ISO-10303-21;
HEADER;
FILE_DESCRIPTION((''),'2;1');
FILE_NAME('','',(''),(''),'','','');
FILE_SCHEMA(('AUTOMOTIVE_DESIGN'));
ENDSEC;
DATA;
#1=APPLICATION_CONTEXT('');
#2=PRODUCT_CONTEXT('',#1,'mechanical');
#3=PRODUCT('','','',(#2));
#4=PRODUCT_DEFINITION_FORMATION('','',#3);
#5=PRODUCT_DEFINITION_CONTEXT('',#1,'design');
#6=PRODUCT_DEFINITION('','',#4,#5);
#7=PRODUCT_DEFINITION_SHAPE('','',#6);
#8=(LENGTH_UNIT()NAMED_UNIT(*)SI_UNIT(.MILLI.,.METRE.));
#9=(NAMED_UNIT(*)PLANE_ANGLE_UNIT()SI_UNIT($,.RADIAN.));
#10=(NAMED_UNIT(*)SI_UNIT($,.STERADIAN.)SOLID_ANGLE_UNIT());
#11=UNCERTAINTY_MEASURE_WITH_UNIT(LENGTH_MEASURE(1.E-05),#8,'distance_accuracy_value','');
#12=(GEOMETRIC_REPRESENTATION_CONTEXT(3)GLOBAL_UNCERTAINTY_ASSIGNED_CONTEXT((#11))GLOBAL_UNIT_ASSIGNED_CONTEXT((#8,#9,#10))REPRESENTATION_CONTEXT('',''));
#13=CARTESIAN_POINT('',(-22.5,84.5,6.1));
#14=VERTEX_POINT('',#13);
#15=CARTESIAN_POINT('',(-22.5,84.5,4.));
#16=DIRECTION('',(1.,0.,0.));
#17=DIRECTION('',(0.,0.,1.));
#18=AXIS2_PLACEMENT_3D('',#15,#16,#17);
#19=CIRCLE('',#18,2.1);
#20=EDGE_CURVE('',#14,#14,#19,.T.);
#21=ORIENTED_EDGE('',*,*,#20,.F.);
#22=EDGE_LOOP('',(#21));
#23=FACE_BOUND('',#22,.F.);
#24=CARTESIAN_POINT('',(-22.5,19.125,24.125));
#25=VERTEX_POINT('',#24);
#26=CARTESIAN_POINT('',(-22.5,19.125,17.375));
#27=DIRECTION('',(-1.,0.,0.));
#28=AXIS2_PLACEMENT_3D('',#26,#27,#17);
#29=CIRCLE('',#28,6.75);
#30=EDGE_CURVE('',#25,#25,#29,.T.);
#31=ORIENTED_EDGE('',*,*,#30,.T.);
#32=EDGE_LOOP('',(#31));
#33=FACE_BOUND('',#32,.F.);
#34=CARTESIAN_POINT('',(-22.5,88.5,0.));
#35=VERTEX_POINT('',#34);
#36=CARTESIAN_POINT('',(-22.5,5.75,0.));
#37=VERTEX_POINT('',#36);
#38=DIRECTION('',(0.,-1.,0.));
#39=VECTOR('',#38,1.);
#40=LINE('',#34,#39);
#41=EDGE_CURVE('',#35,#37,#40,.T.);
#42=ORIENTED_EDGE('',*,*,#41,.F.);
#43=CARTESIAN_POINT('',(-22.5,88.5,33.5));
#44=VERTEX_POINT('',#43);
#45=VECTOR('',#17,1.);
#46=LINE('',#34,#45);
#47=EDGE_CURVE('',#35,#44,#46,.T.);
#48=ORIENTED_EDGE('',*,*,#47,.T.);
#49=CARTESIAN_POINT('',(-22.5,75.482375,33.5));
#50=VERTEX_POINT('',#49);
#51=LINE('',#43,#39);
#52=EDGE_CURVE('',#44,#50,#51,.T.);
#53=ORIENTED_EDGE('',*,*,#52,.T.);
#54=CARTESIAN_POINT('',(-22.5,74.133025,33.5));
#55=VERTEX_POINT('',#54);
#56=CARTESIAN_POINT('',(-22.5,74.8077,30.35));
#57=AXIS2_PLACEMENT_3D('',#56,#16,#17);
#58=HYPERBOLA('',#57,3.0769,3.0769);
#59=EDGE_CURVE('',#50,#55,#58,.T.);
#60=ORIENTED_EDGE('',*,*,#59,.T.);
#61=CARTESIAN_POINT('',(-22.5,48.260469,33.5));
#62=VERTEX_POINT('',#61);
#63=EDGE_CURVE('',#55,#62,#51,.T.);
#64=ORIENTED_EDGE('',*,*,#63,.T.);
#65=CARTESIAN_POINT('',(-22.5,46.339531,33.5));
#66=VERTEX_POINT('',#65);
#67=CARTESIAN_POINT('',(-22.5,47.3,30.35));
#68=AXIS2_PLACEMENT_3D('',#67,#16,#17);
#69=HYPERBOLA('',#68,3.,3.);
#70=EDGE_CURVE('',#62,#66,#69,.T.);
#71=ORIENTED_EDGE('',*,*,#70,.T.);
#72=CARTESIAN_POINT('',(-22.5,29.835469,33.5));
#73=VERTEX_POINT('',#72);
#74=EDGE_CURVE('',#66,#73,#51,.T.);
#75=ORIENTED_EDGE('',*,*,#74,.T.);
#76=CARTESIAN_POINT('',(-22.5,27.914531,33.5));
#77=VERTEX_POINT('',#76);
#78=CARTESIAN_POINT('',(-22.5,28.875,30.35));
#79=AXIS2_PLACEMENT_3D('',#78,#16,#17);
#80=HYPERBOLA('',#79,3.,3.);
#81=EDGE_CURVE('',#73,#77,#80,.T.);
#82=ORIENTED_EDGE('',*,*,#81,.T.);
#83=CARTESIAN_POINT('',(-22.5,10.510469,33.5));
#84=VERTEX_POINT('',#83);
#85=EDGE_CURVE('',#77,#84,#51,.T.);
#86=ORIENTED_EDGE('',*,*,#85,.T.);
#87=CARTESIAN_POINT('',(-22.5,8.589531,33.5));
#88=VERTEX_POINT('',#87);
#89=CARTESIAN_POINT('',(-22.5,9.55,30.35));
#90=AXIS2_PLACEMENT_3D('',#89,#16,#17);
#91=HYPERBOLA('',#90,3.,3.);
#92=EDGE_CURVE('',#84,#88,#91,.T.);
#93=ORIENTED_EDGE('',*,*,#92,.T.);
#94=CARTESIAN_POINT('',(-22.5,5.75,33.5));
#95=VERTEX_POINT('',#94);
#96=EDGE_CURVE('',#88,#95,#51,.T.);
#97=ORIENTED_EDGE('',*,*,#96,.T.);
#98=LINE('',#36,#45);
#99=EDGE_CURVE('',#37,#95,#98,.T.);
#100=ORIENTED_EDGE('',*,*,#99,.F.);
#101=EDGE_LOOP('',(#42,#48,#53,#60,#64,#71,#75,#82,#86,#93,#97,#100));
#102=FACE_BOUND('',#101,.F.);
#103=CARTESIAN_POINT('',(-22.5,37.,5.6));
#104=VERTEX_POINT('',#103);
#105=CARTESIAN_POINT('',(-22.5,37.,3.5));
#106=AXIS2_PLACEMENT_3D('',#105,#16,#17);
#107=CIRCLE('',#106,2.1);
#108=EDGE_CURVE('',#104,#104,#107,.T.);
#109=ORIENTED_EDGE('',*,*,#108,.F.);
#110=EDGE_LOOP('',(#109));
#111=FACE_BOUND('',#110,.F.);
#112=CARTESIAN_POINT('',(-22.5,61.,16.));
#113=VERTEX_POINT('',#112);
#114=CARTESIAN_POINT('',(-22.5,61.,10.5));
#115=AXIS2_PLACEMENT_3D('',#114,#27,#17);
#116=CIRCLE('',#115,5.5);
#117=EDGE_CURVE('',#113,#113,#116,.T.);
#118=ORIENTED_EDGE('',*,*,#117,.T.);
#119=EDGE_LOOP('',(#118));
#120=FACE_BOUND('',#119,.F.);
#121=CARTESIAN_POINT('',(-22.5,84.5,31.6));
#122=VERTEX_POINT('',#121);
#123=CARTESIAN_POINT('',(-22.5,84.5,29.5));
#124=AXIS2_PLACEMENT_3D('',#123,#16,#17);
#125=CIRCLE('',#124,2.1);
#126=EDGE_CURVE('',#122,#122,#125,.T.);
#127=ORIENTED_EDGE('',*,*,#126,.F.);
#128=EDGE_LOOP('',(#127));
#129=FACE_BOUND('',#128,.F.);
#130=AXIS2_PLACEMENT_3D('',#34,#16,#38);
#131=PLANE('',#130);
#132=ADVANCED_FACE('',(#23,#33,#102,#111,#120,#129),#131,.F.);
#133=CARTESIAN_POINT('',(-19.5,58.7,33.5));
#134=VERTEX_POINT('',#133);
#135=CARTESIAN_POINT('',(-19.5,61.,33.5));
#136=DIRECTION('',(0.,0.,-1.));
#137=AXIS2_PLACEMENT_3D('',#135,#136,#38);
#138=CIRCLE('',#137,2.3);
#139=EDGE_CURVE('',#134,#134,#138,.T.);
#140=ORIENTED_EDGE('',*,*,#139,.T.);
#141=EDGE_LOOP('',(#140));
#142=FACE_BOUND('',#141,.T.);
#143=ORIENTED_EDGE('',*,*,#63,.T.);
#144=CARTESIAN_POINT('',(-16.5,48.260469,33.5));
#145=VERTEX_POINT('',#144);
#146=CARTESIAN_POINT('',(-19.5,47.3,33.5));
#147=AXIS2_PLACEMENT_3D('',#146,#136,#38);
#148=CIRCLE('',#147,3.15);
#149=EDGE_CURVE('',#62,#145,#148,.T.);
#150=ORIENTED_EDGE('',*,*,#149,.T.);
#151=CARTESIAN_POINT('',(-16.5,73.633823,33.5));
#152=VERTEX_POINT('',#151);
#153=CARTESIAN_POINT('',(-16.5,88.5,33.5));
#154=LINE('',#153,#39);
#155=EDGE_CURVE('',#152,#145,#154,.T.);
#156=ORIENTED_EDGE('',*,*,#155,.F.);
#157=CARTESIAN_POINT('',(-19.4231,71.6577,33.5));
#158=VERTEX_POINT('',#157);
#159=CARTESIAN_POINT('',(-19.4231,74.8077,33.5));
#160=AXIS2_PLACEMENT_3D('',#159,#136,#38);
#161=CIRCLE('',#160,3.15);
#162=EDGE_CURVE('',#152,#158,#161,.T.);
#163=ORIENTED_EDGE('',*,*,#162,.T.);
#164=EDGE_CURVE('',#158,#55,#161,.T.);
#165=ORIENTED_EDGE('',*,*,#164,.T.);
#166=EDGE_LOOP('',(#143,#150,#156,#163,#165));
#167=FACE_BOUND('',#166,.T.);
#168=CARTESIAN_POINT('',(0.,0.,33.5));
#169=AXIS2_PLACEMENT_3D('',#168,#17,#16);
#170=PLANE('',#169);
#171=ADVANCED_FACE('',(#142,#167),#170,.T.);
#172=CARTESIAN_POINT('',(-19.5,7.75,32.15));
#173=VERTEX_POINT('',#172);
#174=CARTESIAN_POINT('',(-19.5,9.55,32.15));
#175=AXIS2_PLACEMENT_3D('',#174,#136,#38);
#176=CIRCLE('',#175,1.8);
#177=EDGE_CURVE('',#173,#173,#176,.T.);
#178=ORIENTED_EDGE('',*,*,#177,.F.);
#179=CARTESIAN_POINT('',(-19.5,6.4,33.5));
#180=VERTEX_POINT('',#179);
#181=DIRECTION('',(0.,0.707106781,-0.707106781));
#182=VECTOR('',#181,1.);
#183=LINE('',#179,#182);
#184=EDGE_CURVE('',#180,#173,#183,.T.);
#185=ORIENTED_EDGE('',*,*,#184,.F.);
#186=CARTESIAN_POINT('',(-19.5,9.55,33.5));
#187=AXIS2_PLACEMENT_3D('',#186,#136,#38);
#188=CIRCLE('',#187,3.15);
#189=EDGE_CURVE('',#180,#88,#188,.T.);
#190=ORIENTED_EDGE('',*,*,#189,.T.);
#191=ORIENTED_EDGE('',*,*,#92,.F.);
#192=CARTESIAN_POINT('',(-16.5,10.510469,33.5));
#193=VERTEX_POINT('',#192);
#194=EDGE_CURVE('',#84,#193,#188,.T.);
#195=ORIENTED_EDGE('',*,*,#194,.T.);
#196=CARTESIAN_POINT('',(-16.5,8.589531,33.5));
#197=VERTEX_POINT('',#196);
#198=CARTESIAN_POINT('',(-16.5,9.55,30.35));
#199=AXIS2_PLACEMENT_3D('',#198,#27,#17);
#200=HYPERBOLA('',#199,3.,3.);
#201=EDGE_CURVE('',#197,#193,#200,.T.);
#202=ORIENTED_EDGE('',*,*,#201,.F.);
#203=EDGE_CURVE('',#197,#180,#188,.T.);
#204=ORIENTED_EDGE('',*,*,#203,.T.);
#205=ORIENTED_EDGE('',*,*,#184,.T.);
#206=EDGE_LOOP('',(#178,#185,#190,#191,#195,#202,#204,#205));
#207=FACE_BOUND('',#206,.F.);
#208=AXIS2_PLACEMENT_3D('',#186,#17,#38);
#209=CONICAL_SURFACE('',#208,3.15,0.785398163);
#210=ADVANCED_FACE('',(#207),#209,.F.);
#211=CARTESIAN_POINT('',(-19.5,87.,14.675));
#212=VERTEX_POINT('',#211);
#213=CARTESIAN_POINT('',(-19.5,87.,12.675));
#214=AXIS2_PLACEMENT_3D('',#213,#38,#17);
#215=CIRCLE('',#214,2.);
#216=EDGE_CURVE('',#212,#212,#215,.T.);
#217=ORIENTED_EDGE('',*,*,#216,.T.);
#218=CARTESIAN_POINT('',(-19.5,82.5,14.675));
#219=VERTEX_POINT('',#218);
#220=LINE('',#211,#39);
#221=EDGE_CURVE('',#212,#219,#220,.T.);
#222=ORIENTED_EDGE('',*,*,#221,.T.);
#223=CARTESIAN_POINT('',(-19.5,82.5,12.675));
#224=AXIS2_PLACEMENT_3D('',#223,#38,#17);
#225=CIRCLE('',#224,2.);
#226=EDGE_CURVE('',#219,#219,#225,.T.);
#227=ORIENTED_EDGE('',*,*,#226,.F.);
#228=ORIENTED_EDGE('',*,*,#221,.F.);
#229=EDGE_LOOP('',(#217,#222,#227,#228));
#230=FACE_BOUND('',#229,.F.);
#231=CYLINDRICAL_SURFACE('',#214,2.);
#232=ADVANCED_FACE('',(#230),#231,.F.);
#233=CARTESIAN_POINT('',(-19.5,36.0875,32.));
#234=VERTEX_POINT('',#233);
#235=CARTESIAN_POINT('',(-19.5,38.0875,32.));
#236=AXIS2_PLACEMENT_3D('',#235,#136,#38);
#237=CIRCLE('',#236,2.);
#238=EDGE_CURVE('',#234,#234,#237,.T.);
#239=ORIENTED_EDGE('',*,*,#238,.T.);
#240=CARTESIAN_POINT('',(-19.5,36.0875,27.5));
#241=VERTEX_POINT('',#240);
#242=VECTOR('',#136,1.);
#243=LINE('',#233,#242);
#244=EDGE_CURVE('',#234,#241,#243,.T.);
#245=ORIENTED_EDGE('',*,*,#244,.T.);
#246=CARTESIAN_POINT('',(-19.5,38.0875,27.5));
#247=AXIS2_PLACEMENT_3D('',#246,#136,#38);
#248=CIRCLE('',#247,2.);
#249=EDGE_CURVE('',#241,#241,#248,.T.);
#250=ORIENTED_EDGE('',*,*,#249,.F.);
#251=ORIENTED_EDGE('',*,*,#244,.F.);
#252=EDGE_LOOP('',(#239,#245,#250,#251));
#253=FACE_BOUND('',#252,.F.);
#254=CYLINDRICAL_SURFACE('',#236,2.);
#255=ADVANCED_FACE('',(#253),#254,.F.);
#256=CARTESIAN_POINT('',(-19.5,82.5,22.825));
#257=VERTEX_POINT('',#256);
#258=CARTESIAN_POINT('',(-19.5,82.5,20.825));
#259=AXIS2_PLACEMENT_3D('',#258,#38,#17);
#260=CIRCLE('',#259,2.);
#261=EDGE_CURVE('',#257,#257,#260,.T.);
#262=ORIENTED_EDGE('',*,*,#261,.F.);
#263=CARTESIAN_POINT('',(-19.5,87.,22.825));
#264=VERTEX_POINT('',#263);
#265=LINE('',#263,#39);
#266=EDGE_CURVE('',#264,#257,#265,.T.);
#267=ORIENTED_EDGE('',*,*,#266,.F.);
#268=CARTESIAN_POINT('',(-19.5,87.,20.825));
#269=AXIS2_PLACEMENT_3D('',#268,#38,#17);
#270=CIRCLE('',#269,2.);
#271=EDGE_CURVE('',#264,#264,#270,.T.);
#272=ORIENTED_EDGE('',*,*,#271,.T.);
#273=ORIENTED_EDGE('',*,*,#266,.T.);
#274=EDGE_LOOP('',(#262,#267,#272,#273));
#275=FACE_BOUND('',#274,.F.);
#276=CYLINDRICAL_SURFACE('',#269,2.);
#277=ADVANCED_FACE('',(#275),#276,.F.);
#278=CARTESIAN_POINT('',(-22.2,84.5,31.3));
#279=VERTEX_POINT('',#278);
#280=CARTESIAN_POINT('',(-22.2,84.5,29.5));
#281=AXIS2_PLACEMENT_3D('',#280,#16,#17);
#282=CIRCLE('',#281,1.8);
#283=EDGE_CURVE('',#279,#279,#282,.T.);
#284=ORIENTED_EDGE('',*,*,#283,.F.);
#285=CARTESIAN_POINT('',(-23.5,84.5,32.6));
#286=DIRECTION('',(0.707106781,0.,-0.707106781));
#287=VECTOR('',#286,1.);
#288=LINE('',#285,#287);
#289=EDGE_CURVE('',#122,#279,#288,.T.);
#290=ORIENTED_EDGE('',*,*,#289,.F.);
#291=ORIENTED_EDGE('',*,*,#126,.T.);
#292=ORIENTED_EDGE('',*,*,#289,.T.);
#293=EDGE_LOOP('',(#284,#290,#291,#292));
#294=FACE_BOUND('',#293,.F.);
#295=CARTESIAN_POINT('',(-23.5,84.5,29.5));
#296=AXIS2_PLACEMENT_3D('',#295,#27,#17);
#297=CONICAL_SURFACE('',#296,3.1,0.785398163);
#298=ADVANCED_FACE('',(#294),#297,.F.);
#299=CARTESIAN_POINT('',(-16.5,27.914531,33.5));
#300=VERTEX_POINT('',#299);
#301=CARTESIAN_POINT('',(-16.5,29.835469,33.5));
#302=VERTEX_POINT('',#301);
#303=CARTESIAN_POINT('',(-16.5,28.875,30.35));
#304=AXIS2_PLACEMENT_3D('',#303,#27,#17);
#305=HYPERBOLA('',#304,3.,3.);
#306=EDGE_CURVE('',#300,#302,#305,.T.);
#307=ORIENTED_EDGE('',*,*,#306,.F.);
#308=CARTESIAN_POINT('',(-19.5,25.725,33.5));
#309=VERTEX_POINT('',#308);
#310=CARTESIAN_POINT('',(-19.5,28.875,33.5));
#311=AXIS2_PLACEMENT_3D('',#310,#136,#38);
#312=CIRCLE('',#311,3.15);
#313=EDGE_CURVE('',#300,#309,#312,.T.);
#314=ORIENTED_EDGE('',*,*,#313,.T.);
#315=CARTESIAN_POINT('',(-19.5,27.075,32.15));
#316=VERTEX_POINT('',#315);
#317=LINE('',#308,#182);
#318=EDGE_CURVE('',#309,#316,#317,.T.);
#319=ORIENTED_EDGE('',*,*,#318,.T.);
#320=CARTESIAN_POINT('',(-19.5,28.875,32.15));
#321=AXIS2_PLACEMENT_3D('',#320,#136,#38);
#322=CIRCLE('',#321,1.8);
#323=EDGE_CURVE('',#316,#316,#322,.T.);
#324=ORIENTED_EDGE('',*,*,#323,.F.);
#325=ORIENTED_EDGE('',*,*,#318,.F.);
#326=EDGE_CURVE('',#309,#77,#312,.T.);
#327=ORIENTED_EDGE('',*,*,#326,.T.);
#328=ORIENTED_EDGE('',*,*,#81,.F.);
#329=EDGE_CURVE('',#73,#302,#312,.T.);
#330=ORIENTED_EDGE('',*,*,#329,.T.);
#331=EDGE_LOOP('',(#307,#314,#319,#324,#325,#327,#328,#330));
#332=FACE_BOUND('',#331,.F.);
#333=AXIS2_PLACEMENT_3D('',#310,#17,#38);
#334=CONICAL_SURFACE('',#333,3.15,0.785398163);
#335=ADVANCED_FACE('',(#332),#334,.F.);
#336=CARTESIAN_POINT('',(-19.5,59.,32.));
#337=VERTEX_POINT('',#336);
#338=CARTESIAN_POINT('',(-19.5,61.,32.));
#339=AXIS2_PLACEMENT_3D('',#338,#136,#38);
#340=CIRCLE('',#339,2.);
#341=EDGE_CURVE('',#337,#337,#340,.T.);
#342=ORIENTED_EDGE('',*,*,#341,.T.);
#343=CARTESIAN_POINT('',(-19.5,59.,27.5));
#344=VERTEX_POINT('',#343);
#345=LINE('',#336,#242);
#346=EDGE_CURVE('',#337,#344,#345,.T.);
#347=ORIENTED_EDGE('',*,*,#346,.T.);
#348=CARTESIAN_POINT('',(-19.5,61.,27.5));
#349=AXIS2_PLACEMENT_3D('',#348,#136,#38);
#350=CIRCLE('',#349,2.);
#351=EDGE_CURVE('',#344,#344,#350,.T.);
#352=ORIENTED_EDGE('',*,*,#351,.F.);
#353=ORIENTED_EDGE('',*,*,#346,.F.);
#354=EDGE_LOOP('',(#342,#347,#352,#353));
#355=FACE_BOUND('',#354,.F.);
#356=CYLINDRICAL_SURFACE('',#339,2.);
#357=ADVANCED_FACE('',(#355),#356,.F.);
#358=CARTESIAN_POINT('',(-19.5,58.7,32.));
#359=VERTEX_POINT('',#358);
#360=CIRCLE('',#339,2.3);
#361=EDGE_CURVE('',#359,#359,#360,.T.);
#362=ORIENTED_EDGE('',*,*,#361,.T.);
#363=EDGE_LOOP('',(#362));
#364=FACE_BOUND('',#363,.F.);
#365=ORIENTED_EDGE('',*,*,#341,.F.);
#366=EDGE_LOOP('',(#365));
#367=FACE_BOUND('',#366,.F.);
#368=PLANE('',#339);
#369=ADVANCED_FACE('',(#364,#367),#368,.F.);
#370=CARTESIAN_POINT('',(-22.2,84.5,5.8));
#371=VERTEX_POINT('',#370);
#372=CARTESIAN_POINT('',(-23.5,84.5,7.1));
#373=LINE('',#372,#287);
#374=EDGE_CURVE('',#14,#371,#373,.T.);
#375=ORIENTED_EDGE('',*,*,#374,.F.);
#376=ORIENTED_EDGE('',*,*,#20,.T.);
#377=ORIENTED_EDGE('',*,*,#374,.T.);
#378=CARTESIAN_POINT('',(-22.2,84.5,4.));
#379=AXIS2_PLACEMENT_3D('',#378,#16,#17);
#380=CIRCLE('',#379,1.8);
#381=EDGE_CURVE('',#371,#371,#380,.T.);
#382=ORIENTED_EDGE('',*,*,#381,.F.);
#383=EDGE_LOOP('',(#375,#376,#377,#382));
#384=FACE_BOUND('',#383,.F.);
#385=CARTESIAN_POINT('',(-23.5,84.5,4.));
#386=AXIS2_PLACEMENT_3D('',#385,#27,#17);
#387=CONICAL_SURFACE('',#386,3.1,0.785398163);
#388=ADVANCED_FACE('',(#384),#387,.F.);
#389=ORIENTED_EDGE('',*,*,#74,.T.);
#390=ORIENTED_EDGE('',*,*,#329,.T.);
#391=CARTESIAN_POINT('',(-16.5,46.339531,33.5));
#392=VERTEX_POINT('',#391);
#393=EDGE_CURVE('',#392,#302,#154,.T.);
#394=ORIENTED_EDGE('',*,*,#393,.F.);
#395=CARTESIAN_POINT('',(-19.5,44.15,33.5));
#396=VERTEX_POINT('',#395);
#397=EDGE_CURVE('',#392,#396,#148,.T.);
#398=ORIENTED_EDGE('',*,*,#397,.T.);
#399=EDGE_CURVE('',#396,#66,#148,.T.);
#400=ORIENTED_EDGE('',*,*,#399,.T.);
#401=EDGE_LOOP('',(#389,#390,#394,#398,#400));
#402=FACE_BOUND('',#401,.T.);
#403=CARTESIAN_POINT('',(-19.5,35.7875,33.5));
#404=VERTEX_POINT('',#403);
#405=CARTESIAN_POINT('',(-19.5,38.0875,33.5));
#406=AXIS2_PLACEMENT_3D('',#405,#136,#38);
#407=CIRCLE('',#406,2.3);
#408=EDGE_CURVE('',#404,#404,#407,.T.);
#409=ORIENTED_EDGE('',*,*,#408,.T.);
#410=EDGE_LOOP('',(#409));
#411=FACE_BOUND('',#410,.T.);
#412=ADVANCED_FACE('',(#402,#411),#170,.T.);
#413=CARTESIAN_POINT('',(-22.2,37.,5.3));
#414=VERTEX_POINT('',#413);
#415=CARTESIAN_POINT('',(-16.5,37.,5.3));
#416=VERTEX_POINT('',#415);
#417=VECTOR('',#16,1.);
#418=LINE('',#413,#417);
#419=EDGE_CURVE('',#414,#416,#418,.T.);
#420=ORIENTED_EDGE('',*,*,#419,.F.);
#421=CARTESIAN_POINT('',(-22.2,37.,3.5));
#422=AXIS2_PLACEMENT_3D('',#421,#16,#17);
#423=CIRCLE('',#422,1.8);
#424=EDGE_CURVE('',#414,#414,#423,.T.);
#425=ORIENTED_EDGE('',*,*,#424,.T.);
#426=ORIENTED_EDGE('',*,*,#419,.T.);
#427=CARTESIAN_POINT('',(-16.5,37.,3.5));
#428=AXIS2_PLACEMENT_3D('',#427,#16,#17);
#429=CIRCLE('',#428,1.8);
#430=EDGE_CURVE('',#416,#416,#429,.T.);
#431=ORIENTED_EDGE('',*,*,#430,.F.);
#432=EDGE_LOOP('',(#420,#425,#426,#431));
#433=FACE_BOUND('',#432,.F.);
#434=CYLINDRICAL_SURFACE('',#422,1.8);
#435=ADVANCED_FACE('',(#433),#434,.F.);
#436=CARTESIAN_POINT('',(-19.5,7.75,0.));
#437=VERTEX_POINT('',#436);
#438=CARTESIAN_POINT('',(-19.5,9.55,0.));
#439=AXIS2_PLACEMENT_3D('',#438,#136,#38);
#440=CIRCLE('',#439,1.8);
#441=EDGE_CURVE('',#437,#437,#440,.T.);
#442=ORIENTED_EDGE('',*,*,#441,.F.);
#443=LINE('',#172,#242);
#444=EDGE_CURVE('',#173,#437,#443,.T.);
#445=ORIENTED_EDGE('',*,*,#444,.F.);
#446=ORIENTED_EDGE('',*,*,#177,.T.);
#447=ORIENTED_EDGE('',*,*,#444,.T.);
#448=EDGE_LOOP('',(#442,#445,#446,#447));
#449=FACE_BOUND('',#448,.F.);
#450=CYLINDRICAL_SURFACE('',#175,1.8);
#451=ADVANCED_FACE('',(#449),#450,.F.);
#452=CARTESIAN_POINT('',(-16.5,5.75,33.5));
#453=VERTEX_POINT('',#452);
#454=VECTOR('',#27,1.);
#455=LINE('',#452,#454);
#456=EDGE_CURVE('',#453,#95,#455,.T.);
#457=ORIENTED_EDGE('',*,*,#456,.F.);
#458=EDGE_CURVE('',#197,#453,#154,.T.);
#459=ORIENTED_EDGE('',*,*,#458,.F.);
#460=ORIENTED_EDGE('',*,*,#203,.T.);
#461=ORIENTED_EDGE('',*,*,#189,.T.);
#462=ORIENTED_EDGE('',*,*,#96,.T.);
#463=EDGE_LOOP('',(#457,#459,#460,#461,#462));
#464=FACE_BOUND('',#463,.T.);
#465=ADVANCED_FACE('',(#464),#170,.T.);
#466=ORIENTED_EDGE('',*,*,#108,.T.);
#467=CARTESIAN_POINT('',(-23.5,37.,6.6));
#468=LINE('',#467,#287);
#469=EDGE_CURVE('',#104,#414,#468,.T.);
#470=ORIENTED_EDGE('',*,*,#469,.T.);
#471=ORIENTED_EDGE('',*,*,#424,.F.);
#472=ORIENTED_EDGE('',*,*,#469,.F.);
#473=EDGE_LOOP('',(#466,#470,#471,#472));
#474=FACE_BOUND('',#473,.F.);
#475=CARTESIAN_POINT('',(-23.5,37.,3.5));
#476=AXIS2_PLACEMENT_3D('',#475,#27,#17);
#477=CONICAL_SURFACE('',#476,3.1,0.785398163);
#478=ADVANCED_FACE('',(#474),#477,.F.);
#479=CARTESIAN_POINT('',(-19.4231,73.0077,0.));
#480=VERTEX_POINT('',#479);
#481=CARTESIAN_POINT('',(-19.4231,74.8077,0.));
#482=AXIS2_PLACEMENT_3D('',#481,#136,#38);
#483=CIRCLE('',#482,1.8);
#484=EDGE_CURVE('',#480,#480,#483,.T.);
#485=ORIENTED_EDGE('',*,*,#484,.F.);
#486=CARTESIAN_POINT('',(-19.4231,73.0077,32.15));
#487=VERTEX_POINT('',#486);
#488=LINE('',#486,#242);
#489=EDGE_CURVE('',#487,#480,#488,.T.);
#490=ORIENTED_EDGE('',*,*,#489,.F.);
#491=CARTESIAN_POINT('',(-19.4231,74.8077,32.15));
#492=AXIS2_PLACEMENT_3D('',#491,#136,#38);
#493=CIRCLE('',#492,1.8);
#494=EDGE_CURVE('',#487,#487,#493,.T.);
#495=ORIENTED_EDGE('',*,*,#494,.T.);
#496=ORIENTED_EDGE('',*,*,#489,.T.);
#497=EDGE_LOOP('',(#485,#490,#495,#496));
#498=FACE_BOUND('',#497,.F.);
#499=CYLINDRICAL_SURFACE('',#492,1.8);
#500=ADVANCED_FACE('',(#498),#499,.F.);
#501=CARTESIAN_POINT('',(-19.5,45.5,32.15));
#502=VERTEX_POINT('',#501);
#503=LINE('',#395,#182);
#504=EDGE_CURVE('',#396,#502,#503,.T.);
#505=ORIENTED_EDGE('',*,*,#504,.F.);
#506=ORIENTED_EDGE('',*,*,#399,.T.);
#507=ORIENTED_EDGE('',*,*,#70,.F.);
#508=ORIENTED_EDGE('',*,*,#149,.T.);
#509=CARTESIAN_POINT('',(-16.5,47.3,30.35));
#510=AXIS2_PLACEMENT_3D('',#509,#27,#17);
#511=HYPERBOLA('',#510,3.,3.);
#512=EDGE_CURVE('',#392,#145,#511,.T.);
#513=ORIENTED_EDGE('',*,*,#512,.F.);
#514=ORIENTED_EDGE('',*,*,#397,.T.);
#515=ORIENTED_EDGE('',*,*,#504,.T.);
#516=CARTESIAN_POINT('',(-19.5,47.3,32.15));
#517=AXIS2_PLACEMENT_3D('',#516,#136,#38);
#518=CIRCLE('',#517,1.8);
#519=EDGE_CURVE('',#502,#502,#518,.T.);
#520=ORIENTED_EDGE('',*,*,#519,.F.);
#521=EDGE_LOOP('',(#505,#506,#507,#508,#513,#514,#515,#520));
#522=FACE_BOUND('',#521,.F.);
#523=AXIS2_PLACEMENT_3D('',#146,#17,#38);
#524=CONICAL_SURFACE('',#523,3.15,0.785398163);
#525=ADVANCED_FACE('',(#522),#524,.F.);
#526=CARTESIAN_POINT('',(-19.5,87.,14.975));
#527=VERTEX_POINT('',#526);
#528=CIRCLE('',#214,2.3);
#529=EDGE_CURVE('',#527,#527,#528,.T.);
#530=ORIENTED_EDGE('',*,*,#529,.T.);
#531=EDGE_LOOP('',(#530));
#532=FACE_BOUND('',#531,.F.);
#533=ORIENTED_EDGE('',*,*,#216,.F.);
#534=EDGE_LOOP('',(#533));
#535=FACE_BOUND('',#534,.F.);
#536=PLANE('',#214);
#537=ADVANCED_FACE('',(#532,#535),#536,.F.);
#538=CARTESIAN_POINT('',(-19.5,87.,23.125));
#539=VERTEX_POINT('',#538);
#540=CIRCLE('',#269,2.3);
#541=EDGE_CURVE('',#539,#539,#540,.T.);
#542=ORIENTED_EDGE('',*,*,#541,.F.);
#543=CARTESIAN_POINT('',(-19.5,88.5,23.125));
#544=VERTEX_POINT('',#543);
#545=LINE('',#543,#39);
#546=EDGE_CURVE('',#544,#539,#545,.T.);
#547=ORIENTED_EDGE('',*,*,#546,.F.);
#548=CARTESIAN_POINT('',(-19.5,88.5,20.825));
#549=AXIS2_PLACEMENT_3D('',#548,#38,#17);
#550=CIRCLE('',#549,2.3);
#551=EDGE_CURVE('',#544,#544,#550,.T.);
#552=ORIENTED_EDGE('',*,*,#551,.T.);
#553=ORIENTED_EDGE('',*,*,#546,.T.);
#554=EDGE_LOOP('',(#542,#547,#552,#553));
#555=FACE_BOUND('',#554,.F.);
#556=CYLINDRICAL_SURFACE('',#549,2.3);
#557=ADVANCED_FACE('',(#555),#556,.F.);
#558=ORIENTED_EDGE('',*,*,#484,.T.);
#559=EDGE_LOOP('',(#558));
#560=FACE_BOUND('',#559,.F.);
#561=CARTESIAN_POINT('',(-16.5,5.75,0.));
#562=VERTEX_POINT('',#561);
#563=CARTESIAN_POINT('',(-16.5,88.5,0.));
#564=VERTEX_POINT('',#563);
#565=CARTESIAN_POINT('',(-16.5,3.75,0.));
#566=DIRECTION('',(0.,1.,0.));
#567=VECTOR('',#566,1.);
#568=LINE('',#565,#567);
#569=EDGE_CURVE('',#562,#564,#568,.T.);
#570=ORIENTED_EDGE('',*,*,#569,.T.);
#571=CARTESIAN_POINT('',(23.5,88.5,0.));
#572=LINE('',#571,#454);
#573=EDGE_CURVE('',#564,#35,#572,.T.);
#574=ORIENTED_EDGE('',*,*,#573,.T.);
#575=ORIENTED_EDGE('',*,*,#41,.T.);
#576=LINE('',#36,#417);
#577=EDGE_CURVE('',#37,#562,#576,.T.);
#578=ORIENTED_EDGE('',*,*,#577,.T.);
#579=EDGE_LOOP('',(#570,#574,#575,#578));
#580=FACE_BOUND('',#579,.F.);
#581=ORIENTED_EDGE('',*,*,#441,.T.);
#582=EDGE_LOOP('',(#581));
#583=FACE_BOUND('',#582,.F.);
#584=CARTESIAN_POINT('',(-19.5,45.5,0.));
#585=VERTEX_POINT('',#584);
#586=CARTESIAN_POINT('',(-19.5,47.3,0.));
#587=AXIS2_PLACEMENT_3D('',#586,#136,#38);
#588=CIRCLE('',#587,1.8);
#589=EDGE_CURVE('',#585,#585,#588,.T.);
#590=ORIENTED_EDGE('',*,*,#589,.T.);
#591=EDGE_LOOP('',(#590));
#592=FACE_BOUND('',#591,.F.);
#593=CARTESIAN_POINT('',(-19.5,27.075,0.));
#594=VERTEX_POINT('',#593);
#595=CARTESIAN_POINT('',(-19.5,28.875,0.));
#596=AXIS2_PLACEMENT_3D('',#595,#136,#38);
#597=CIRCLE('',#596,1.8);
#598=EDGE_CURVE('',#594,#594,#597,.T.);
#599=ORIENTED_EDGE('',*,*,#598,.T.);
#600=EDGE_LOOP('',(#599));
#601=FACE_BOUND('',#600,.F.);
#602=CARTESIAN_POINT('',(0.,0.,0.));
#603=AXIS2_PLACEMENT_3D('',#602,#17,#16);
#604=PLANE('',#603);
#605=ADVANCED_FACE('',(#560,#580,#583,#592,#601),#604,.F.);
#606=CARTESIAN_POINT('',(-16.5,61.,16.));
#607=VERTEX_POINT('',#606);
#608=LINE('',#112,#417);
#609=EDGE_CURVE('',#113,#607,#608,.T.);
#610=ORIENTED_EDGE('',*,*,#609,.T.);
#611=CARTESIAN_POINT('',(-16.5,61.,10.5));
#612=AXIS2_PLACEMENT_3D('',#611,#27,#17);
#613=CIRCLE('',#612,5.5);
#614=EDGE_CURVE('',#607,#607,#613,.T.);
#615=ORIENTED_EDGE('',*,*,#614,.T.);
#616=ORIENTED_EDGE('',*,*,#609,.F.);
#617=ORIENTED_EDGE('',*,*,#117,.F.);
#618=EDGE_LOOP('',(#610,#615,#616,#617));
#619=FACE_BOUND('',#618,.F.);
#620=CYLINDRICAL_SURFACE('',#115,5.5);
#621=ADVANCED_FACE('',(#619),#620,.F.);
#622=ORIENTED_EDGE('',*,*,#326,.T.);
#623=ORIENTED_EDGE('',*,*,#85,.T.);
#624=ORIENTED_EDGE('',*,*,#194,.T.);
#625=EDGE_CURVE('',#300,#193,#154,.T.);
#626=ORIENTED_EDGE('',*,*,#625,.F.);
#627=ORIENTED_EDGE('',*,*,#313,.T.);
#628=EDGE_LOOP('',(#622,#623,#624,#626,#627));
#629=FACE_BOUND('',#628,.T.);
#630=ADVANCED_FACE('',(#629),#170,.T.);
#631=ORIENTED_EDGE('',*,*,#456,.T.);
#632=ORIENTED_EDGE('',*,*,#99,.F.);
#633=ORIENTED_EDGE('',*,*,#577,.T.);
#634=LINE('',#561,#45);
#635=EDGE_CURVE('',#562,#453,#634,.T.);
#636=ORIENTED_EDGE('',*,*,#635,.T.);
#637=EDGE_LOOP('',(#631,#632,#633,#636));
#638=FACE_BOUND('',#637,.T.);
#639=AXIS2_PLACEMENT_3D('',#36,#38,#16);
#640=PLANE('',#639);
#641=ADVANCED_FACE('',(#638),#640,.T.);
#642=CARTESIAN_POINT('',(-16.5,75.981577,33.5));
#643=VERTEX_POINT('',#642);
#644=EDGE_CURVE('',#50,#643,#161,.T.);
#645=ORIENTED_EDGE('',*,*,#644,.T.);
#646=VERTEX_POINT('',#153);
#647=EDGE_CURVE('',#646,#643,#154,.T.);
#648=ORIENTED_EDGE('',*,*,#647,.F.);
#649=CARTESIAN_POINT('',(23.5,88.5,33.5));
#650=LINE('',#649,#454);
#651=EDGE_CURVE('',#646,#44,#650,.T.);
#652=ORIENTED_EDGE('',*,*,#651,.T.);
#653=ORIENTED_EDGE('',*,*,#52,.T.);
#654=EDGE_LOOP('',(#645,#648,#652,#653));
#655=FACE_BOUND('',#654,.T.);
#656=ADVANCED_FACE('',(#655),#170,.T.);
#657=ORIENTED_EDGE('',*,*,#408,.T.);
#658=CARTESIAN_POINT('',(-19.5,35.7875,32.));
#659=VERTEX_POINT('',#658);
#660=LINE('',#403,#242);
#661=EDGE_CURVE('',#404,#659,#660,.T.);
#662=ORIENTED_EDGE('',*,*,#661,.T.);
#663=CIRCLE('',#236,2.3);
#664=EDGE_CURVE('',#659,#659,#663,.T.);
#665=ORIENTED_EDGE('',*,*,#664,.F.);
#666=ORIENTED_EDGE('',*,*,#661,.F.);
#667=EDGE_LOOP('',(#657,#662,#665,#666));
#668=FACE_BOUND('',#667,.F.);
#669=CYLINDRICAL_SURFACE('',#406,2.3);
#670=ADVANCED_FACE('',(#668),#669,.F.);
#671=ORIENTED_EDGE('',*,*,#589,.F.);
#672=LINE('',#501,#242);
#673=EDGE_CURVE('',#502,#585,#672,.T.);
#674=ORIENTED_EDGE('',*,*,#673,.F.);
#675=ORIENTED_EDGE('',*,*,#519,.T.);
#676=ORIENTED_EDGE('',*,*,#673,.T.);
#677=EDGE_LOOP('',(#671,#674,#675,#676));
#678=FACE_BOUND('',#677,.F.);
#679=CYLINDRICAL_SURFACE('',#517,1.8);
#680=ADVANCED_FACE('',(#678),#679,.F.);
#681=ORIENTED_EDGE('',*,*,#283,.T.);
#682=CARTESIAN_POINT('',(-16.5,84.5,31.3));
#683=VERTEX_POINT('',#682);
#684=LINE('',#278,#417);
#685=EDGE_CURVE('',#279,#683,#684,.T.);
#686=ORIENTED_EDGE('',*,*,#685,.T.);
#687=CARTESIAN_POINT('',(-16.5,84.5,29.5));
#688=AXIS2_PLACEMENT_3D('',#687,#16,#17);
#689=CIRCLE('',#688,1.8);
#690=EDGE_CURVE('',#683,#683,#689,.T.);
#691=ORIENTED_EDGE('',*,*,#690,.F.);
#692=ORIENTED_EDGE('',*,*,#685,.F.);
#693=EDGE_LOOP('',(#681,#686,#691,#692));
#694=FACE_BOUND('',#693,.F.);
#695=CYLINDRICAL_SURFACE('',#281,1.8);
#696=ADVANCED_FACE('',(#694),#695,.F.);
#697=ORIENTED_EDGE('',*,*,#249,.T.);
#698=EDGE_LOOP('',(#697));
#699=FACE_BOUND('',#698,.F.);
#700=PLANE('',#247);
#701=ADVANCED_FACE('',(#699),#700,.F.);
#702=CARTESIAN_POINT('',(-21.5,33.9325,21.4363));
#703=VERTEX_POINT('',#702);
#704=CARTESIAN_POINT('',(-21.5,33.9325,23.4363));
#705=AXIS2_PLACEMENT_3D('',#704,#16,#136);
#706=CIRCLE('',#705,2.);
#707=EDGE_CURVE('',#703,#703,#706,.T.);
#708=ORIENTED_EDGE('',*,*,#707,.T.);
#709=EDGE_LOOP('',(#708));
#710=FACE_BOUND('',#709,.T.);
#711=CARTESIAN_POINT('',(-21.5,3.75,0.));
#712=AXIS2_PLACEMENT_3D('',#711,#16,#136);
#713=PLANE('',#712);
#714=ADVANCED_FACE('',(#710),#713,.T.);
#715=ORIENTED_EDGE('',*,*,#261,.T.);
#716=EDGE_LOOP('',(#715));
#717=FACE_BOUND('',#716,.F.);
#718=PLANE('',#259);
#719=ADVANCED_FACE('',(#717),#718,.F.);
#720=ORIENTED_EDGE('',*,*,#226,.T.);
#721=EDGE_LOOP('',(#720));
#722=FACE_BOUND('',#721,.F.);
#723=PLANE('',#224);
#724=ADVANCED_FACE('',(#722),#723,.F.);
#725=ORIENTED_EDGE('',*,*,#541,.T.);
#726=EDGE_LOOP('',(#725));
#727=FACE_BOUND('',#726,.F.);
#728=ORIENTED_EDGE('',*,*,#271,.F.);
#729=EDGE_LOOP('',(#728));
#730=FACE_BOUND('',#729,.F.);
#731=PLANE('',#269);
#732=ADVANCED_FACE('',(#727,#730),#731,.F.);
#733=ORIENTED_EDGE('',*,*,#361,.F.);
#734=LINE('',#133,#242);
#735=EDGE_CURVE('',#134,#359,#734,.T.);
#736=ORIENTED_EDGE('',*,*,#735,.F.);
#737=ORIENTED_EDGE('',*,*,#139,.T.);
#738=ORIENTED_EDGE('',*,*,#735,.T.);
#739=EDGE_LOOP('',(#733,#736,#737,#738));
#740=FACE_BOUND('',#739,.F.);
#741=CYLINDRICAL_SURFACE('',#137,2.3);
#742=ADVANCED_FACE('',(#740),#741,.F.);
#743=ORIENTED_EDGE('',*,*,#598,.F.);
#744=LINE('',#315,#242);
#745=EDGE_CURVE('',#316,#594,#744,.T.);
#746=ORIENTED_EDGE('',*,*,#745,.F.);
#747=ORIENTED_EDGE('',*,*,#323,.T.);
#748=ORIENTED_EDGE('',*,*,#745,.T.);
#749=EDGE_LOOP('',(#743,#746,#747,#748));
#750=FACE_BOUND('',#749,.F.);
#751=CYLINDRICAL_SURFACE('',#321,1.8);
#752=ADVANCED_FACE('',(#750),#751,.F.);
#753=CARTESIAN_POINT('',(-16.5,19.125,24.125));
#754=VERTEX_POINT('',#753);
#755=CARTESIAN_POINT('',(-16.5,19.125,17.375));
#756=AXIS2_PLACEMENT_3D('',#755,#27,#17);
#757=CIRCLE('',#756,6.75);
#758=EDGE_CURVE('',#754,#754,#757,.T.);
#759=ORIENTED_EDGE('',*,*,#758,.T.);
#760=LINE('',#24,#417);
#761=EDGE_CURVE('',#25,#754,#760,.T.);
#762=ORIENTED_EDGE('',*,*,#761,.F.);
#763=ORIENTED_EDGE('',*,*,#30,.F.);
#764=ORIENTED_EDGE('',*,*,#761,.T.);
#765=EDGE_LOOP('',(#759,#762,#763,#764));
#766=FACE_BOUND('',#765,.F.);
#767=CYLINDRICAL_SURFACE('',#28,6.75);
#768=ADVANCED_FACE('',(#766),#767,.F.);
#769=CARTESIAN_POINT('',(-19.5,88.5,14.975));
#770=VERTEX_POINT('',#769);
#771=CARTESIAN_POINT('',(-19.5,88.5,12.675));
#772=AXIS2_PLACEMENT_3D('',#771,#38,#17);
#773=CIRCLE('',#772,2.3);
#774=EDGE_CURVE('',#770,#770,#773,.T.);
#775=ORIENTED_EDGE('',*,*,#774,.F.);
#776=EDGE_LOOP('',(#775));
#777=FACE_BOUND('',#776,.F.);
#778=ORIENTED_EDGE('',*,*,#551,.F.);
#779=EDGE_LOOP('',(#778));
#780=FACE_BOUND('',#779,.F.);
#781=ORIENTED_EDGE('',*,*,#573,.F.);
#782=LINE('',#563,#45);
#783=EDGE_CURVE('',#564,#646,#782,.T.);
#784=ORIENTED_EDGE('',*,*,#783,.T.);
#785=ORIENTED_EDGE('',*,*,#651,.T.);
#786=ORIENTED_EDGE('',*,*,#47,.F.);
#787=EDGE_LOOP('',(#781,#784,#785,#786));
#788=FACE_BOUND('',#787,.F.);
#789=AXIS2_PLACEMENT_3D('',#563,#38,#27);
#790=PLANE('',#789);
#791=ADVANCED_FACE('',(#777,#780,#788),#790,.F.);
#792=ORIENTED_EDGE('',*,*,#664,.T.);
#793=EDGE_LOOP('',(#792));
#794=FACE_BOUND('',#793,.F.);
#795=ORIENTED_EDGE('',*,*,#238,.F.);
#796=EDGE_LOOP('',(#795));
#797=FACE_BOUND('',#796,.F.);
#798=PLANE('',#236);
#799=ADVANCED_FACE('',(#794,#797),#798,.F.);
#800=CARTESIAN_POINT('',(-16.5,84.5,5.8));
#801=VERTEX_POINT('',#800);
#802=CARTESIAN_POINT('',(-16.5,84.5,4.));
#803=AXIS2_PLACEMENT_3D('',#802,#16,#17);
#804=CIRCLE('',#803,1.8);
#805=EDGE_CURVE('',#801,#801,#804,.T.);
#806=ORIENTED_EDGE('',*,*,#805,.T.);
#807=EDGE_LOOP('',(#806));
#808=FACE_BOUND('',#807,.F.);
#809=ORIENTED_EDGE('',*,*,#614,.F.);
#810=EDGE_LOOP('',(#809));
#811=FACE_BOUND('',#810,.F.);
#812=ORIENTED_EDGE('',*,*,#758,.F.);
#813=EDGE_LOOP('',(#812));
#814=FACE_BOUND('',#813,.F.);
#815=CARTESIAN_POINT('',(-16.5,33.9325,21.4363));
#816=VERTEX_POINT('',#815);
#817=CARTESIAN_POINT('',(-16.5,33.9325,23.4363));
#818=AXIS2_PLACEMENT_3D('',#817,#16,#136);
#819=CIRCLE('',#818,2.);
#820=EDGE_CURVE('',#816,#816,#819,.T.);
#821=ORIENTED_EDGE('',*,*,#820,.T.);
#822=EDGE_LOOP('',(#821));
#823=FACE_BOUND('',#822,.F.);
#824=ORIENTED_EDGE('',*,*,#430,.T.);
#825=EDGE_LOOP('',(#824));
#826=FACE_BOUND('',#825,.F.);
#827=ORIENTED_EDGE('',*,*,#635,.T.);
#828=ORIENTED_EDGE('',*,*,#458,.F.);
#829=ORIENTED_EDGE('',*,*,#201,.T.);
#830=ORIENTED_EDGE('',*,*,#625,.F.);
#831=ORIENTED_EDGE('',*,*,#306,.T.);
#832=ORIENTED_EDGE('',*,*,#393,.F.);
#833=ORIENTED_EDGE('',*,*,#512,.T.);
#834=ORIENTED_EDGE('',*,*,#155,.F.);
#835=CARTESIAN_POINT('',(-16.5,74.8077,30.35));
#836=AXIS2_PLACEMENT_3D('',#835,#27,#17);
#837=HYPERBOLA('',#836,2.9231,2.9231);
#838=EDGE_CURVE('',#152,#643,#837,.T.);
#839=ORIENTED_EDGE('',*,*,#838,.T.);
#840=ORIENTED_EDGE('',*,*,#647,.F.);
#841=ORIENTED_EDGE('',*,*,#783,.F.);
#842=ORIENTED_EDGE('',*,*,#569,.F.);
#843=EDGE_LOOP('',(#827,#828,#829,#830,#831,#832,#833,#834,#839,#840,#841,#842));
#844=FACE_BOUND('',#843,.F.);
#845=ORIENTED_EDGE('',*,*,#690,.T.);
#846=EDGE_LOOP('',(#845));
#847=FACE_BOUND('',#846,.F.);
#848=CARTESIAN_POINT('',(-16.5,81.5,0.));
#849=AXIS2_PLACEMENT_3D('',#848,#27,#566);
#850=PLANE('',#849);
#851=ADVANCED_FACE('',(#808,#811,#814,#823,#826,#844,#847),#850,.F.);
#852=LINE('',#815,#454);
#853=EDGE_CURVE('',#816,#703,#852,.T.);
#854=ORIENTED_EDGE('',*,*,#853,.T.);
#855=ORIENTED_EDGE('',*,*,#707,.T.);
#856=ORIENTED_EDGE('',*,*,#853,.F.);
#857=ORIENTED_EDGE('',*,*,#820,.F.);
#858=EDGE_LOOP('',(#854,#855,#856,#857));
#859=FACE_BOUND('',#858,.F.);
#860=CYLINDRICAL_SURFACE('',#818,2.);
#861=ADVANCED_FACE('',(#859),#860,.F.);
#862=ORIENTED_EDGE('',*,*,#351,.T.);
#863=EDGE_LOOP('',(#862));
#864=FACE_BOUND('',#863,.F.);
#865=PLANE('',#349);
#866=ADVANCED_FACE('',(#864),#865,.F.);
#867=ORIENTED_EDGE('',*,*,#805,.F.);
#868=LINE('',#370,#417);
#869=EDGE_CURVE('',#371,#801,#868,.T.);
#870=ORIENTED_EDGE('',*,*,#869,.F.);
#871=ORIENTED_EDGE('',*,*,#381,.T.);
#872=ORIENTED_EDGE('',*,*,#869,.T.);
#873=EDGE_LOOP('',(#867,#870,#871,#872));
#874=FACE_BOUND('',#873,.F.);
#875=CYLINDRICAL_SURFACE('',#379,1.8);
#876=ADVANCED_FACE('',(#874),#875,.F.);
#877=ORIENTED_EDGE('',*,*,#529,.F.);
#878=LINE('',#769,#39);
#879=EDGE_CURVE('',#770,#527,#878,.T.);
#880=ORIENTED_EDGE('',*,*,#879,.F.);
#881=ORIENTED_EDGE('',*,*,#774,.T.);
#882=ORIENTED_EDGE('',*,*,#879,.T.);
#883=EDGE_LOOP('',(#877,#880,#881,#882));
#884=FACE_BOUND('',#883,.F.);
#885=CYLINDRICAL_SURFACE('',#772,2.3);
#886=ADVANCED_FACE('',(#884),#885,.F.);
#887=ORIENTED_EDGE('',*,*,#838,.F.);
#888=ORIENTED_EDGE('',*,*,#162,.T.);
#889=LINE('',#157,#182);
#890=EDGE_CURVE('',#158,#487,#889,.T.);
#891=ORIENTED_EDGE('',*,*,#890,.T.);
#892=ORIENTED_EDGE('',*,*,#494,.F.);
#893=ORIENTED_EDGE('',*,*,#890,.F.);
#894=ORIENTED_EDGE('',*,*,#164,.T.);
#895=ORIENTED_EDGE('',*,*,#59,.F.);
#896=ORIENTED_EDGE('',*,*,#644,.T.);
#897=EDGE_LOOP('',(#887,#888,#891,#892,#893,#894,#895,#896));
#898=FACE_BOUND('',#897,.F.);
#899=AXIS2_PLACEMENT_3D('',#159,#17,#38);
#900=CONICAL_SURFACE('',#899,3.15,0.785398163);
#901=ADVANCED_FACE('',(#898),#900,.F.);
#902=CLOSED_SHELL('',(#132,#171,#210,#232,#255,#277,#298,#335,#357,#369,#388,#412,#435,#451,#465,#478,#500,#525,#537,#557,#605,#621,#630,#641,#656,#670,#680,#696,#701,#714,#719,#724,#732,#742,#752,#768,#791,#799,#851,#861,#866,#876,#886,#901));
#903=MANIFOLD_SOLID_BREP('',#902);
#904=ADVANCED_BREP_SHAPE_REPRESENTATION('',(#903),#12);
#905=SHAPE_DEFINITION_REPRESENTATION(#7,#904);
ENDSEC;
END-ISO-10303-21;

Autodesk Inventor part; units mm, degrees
ref_plane "YZ Plane" through (0, 0, 0) normal (1, 0, 0) x (0, 1, 0)
ref_plane "XZ Plane" through (0, 0, 0) normal (0, 1, 0) x (-1, 0, 0)
ref_plane "Work Plane1" through (0, 0, 0) normal (0, 0, 1) x (1, 0, 0)
sketch "Sketch1" plane through (0, 0, 0) normal (0, 0, 1) x (1, 0, 0)
  line L0 (23.5, 88.5) -> (-23.5, 88.5) projected
  line L1 (-23.5, 88.5) -> (-23.5, 36.5) projected
  line L2 (-26.5, 33.5) -> (-89, 33.5) projected
  line L3 (-89, 33.5) -> (-89, -72.5) projected
  line L4 (-89, -72.5) -> (-77, -72.5) projected
  line L5 (-74, -75.5) -> (-74, -93.5) projected
  line L6 (-74, -93.5) -> (74, -93.5) projected
  line L7 (74, -93.5) -> (74, -75.5) projected
  line L8 (77, -72.5) -> (89, -72.5) projected
  line L9 (89, -72.5) -> (89, 33.5) projected
  line L10 (89, 33.5) -> (26.5, 33.5) projected
  line L11 (23.5, 36.5) -> (23.5, 88.5) projected
  line L12 (-4.5, 81.5) -> (-4.5, 36.5) projected
  line L13 (-7.5, 33.5) -> (-13.5, 33.5) projected
  line L14 (-16.5, 36.5) -> (-16.5, 81.5) projected
  line L15 (7.5, 84.5) -> (13.5, 84.5) projected
  line L16 (16.5, 81.5) -> (16.5, 36.5) projected
  line L17 (13.5, 33.5) -> (7.5, 33.5) projected
  line L18 (4.5, 36.5) -> (4.5, 81.5) projected
  line L19 (-13.5, 84.5) -> (-7.5, 84.5) projected
  line L20 (-16.5, 88.5) -> (-22.5, 88.5)
  line L21 (-22.5, 88.5) -> (-22.5, 3.75)
  line L22 (-22.5, 3.75) -> (-16.5, 3.75)
  line L23 (-16.5, 3.75) -> (-16.5, 88.5)
  line L24 (-32.2, 4.75) -> (-59.9, 4.75)
  arc A0 (13.5, 33.5) -> (16.5, 36.5) centre (13.5, 36.5) ccw projected
  arc A1 (4.5, 36.5) -> (7.5, 33.5) centre (7.5, 36.5) ccw projected
  arc A2 (7.5, 84.5) -> (4.5, 81.5) centre (7.5, 81.5) ccw projected
  arc A3 (16.5, 81.5) -> (13.5, 84.5) centre (13.5, 81.5) ccw projected
  arc A4 (-4.5, 81.5) -> (-7.5, 84.5) centre (-7.5, 81.5) ccw projected
  arc A5 (-7.5, 33.5) -> (-4.5, 36.5) centre (-7.5, 36.5) ccw projected
  arc A6 (-16.5, 36.5) -> (-13.5, 33.5) centre (-13.5, 36.5) ccw projected
  arc A7 (-13.5, 84.5) -> (-16.5, 81.5) centre (-13.5, 81.5) ccw projected
  arc A8 (-26.5, 33.5) -> (-23.5, 36.5) centre (-26.5, 36.5) ccw projected
  arc A9 (-74, -75.5) -> (-77, -72.5) centre (-77, -75.5) ccw projected
  arc A10 (77, -72.5) -> (74, -75.5) centre (77, -75.5) ccw projected
  arc A11 (23.5, 36.5) -> (26.5, 33.5) centre (26.5, 36.5) ccw projected
  circle A12 centre (21.5, -85.5) radius 1.8 projected
  circle A13 centre (-64.5, -85.5) radius 1.8 projected
  circle A14 centre (83.4, -16.3889) radius 1.8 projected
  circle A15 centre (-83.4, -19.2889) radius 1.8 projected
  circle A16 centre (-21.5, -85.5) radius 1.8 projected
  circle A17 centre (64.5, -85.5) radius 1.8 projected
  circle A18 centre (39.125, 25.9125) radius 1.0065 projected
  circle A19 centre (72.95, 12.275) radius 1.0065 projected
  circle A20 centre (86, 30.5) radius 1.0065 projected
  circle A21 centre (-86, 30.5) radius 1.0065 projected
  circle A22 centre (-39.125, 12.3375) radius 1.0065 projected
  circle A23 centre (-72.95, 25.975) radius 1.0065 projected
  circle A24 centre (-72.95, 12.275) radius 1.0065 projected
  circle A25 centre (-39.125, 25.9125) radius 1.0065 projected
  circle A26 centre (-86, 7.75) radius 1.0065 projected
  circle A27 centre (86, 7.75) radius 1.0065 projected
  circle A28 centre (72.95, 25.975) radius 1.0065 projected
  circle A29 centre (39.125, 12.3375) radius 1.0065 projected
  circle A30 centre (78, -67.1725) radius 1.2295 projected
  circle A31 centre (-24.1, -73.1) radius 1.2295 projected
  circle A32 centre (-42.4984, -44.6666) radius 1.2295 projected
  circle A33 centre (-79, -42.3889) radius 1.2295 projected
  circle A34 centre (-19.5, 28.875) radius 1.2295 projected
  circle A35 centre (19.5, 9.55) radius 1.2295 projected
  circle A36 centre (19.5, 47.3) radius 1.2295 projected
  circle A37 centre (-19.5, 47.3) radius 1.2295 projected
  circle A38 centre (0, 74.7) radius 1.2295 projected
  circle A39 centre (-19.4231, 74.8077) radius 1.2295 projected
  circle A40 centre (19.5, 74.7) radius 1.2295 projected
  circle A41 centre (0, 49.05) radius 1.2295 projected
  circle A42 centre (19.5, 28.875) radius 1.2295 projected
  circle A43 centre (0, 19.125) radius 1.2295 projected
  circle A44 centre (-19.5, 9.55) radius 1.2295 projected
  circle A45 centre (-78, -67.1725) radius 1.2295 projected
  circle A46 centre (24.1, -73.1) radius 1.2295 projected
  circle A47 centre (42.5, -44.6649) radius 1.2295 projected
  circle A48 centre (79, -42.3889) radius 1.2295 projected
  circle A49 centre (24.1, -24.9) radius 1.2295 projected
  circle A50 centre (-24.1, -24.9) radius 1.2295 projected
  point P0 (0, 0)
  point P1 (-16.5, 36.5)
  point P2 (-16.5, 81.5)
  point P3 (7.5, 81.5)
  point P4 (13.5, 81.5)
  point P5 (-7.5, 81.5)
  point P6 (-13.5, 81.5)
  dimension "d0" = 1
  dimension "d2" = 1
ref_plane "Work Plane2" through (-89, -40.3889, 33.5) normal (0, 0, 1) x (1, 0, 0)
extrude "Extrusion1" add sketch "Sketch1" along normal up to surface (33.5 mm away) contours L23 L14 L22 L21 L0 | A34 | A37 | A39 | A44
sketch "Sketch2" plane through (-22.5, 3.75, 0) normal (-1, 0, 0) x (0, 0, 1)
  arc A0 (15.7043, 9.7757) -> (16.863, 11.545) centre (12.3771, 13.2188) ccw projected
  arc A1 (16.863, 11.545) -> (17.4685, 11.512) centre (17.375, 15.375) ccw projected
  arc A2 (17.4685, 11.512) -> (18.4285, 9.6275) centre (22.1095, 12.6893) ccw projected
  arc A3 (18.4285, 9.6275) -> (19.3146, 9.863) centre (17.375, 15.375) ccw projected
  arc A4 (19.3146, 9.863) -> (19.2121, 11.9755) centre (14.599, 10.6929) ccw projected
  arc A5 (19.2121, 11.9755) -> (19.7212, 12.3047) centre (17.375, 15.375) ccw projected
  arc A6 (19.7212, 12.3047) -> (21.6056, 11.3444) centre (22.7839, 15.9851) ccw projected
  arc A7 (21.6056, 11.3444) -> (22.184, 12.0558) centre (17.375, 15.375) ccw projected
  arc A8 (22.184, 12.0558) -> (20.8594, 13.7045) centre (17.8813, 9.9554) ccw projected
  arc A9 (20.8594, 13.7045) -> (21.0778, 14.2702) centre (17.375, 15.375) ccw projected
  arc A10 (21.0778, 14.2702) -> (23.1668, 14.6008) centre (21.3923, 19.0479) ccw projected
  arc A11 (23.1668, 14.6008) -> (23.2166, 15.5164) centre (17.375, 15.375) ccw projected
  arc A12 (23.2166, 15.5164) -> (21.1758, 16.0716) centre (20.9701, 11.288) ccw projected
  arc A13 (21.1758, 16.0716) -> (21.02, 16.6576) centre (17.375, 15.375) ccw projected
  arc A14 (21.02, 16.6576) -> (22.5157, 18.153) centre (18.4662, 20.7077) ccw projected
  arc A15 (22.5157, 18.153) -> (22.0178, 18.923) centre (17.375, 15.375) ccw projected
  arc A16 (22.0178, 18.923) -> (20.0404, 18.1726) centre (22.6858, 14.1817) ccw projected
  arc A17 (20.0404, 18.1726) -> (19.57, 18.5552) centre (17.375, 15.375) ccw projected
  arc A18 (19.57, 18.5552) -> (19.9011, 20.644) centre (15.1233, 20.3306) ccw projected
  arc A19 (19.9011, 20.644) -> (19.0457, 20.9743) centre (17.375, 15.375) ccw projected
  arc A20 (19.0457, 20.9743) -> (17.887, 19.205) centre (22.3729, 17.5312) ccw projected
  arc A21 (17.887, 19.205) -> (17.2815, 19.238) centre (17.375, 15.375) ccw projected
  arc A22 (17.2815, 19.238) -> (16.3215, 21.1225) centre (12.6405, 18.0607) ccw projected
  arc A23 (16.3215, 21.1225) -> (15.4354, 20.887) centre (17.375, 15.375) ccw projected
  arc A24 (15.4354, 20.887) -> (15.5379, 18.7745) centre (20.151, 20.0571) ccw projected
  arc A25 (15.5379, 18.7745) -> (15.0288, 18.4453) centre (17.375, 15.375) ccw projected
  arc A26 (15.0288, 18.4453) -> (13.1444, 19.4056) centre (11.9661, 14.7649) ccw projected
  arc A27 (13.1444, 19.4056) -> (12.566, 18.6942) centre (17.375, 15.375) ccw projected
  arc A28 (12.566, 18.6942) -> (13.8906, 17.0455) centre (16.8687, 20.7946) ccw projected
  arc A29 (13.8906, 17.0455) -> (13.6722, 16.4798) centre (17.375, 15.375) ccw projected
  arc A30 (13.6722, 16.4798) -> (11.5832, 16.1492) centre (13.3577, 11.7021) ccw projected
  arc A31 (11.5832, 16.1492) -> (11.5334, 15.2336) centre (17.375, 15.375) ccw projected
  arc A32 (11.5334, 15.2336) -> (13.5742, 14.6784) centre (13.7799, 19.462) ccw projected
  arc A33 (13.5742, 14.6784) -> (13.73, 14.0924) centre (17.375, 15.375) ccw projected
  arc A34 (13.73, 14.0924) -> (12.2343, 12.597) centre (16.2838, 10.0423) ccw projected
  arc A35 (12.2343, 12.597) -> (12.7322, 11.827) centre (17.375, 15.375) ccw projected
  arc A36 (12.7322, 11.827) -> (14.7096, 12.5774) centre (12.0642, 16.5683) ccw projected
  arc A37 (14.7096, 12.5774) -> (15.18, 12.1948) centre (17.375, 15.375) ccw projected
  arc A38 (15.18, 12.1948) -> (14.8489, 10.106) centre (19.6267, 10.4194) ccw projected
  arc A39 (14.8489, 10.106) -> (15.7043, 9.7757) centre (17.375, 15.375) ccw projected
  circle A40 centre (17.375, 15.375) radius 6.75
  circle A41 centre (17.375, 15.375) radius 5.8433
  line L0 (23.2183, 15.375) -> (24.125, 15.375)
  circle A42 centre (10.5, 57.25) radius 5.5 projected
  point P0 (0, -3.75)
  dimension "d6" = 13.5
  dimension "d5" = 0.9067
  dimension "d9" = 11
extrude "Extrusion2" cut sketch "Sketch2" against normal up to next contours A39 A38 A37 A36 A35 A34 A33 A32 A31 A30 A29 A28 A27 A26 A25 A24 A23 A22 A21 A20 A19 A18 A17 A16 A15 A14 A13 A12 A11 A10 A9 A8 A7 A6 A5 A4 A3 A2 A1 A0 | A0 A1 A2 A41 | A41 A36 A37 A38 | A4 A5 A6 A41 | A41 A32 A33 A34 | A8 A9 A10 A41 | A41 A28 A29 A30 | A41 A24 A25 A26 | A12 A13 A14 A41 | A41 A20 A21 A22 | A16 A17 A18 A41 | A40 | A42
sketch "Sketch3" plane through (-16.5, 3.75, 0) normal (1, 0, 0) x (0, 0, -1)
  circle A0 centre (-23.4363, 30.1825) radius 2 projected
  point P0 (0, -3.75)
extrude "Extrusion3" cut sketch "Sketch3" against normal blind 5
ref_plane "Work Plane3" through (-23.5, 3.75, 0) normal (-1, 0, 0) x (0, 0, 1)
sketch "Sketch5" plane through (-23.5, 3.75, 0) normal (-1, 0, 0) x (0, 0, 1)
  circle A0 centre (29.5, 80.75) radius 2.1 projected
  circle A1 centre (4, 80.75) radius 2.1 projected
  circle A2 centre (3.5, 33.25) radius 2.1 projected
  point P0 (0, -3.75)
hole "Hole1" at (-23.5, 84.5, 29.5) at (-23.5, 84.5, 4) at (-23.5, 37, 3.5) direction (1, 0, 0) diameter 3.6 end through all countersink diameter 6.2 countersink angle 90 clearance for "Countersunk Flat Head Screw ISO 2009/7046" size "M3" standard "ISO"
sketch "Sketch6" plane through (-22.5, 3.75, 33.5) normal (0, 0, 1) x (1, 0, 0)
  line L0 (0, 8.625) -> (0, 22.125) projected
  line L1 (1, 32.1825) -> (1, 28.1825) projected
  line L2 (0, 31.15) -> (0, 35.35) projected
  line L3 (0, 51.75) -> (0, 62.75) projected
  line L4 (0, 78.65) -> (0, 82.85) projected
  line L5 (0, 78.65) -> (0, 82.85) projected
  line L6 (6, 0) -> (0, 0) projected
  line L7 (6, 84.75) -> (6, 0) projected
  line L8 (0, 84.75) -> (6, 84.75) projected
  line L9 (0, 0) -> (0, 84.75) projected
  line L10 (6, 28.125) -> (0, 28.125)
  line L11 (0, 28.125) -> (0, 35.35)
  line L12 (0, 35.35) -> (6, 35.35)
  line L13 (6, 35.35) -> (6, 28.125)
  line L14 (0, 8.625) -> (6, 8.625) projected
  line L15 (6, 8.625) -> (0, 8.625)
  line L16 (0, 8.625) -> (0, 22.125)
  line L17 (0, 22.125) -> (6, 22.125)
  line L18 (6, 22.125) -> (6, 8.625)
  line L19 (6, 78.95) -> (0.3, 78.95) projected
  line L20 (6, 84.75) -> (0, 84.75) projected
  line L21 (6, 78.95) -> (0, 78.95)
  line L22 (0, 78.95) -> (0, 84.75)
  line L23 (0, 84.75) -> (6, 84.75)
  line L24 (6, 84.75) -> (6, 78.95)
  line L25 (0, 51.75) -> (6, 51.75) projected
  line L26 (0, 51.75) -> (0, 62.75) projected
  line L27 (6, 51.75) -> (0, 51.75)
  line L28 (0, 51.75) -> (0, 62.75)
  line L29 (0, 62.75) -> (6, 62.75)
  line L30 (6, 62.75) -> (6, 51.75)
  line L31 (6, 0) -> (0, 0)
  line L32 (0, 0) -> (0, 4)
  line L33 (0, 4) -> (6, 4)
  line L34 (6, 4) -> (6, 0)
  circle A0 centre (3, 5.8) radius 1.8
  line L35 (6, 22.125) -> (0, 28.125)
  line L36 (0, 22.125) -> (6, 28.125)
  line L37 (6, 35.35) -> (0, 51.75)
  line L38 (0, 35.35) -> (6, 51.75)
  line L39 (0.3, 82.55) -> (0.3, 78.95) projected
  line L40 (6, 62.75) -> (0.3, 78.95)
  line L41 (6, 82.55) -> (6, 78.95) projected
  line L42 (0.3, 78.95) -> (6, 78.95)
  line L43 (6, 78.95) -> (0, 62.75)
  point P0 (22.5, -3.75)
  point P1 (3, 25.125)
  point P2 (3.0769, 71.0577)
  point P3 (3, 43.55)
  dimension "d20" = 4
  dimension "d21" = 3.6
  dimension "d22" = 3
  dimension "d23" = 3
hole "Hole2" at (-19.5, 28.875, 33.5) at (-19.5, 9.55, 33.5) at (-19.4231, 74.8077, 33.5) at (-19.5, 47.3, 33.5) direction (0, 0, -1) diameter 3.6 end through all countersink diameter 6.3 countersink angle 90 clearance for "Countersunk Flat Head Screw ISO 2009/7046" size "M3" standard "ISO"
sketch "Sketch9" plane through (-22.5, 88.5, 0) normal (0, 1, 0) x (1, 0, 0)
  circle A0 centre (22.5, -20.825) radius 2.3 projected
  circle A1 centre (22.5, -12.675) radius 2.3 projected
  line L0 (18, -33.5) -> (27, -33.5) projected
  line L1 (27, 0) -> (27, -33.5) projected
  line L2 (27, 0) -> (18, 0) projected
  line L3 (18, 0) -> (18, -33.5) projected
  line L4 (22.5, -20.825) -> (0, -20.825)
  line L5 (0, -24.125) -> (0, -10.625) projected
  line L6 (22.5, -12.675) -> (0, -12.675)
  line L7 (6, 0) -> (6, -33.5) projected
  point P0 (22.5, 0)
  point P1 (3, -20.825)
  point P2 (3, -12.675)
  dimension "d45" = 3
  dimension "d46" = 3
  dimension "d47" = 3
  dimension "d48" = 3
hole "Hole5" at (-19.5, 88.5, 20.825) at (-19.5, 88.5, 12.675) direction (0, -1, 0) diameter 4 depth 6 counterbore diameter 4.6 counterbore depth 1.5
sketch "Sketch10" plane through (-19.5, 47.3, 33.5) normal (0, 0, 1) x (1, 0, 0)
  line L0 (-3, 8.2) -> (-3, 19.2) projected
  arc A0 (3, -17.4645) -> (-3, -17.4645) centre (0, -18.425) ccw projected
  arc A1 (-3, -0.9605) -> (3, -0.9605) centre (0, 0) ccw projected
  arc A2 (3, -17.4645) -> (-3, -17.4645) centre (0, -18.425) ccw projected
  line L1 (3, -0.9605) -> (3, -17.4645) projected
  arc A3 (-3, -0.9605) -> (3, -0.9605) centre (0, 0) ccw projected
  line L2 (-3, -17.4645) -> (-3, -0.9605) projected
  line L3 (3, 8.2) -> (-3, 8.2)
  line L4 (3, 19.2) -> (-3, 19.2)
  line L5 (-3, 19.2) -> (3, 8.2)
  line L6 (-3, 8.2) -> (3, 19.2)
  line L7 (3, -17.4645) -> (-3, -0.9605)
  line L8 (-3, -17.4645) -> (3, -0.9605)
  point P0 (19.5, -47.3)
  point P1 (0, -9.2125)
  point P2 (0, 13.7)
hole "Hole6" at (-19.5, 38.0875, 33.5) at (-19.5, 61, 33.5) direction (0, 0, -1) diameter 4 depth 6 counterbore diameter 4.6 counterbore depth 1.5
sketch "Sketch11" plane through (-22.5, 3.75, 0) normal (0, -1, 0) x (1, 0, 0)
  line L0 (6, 33.5) -> (0, 33.5) projected
  line L1 (0, 0) -> (0, 33.5) projected
  line L2 (0, 0) -> (6, 0) projected
  line L3 (6, 0) -> (6, 33.5) projected
  point P0 (22.5, 0)
extrude "Extrusion4" cut sketch "Sketch11" against normal blind 2
equation "\"d22\" = d23"
equation "\"d45\" = d46"
equation "\"d47\" = d48"
properties part number "right_gear_holder" material "Nylon 6/6"
